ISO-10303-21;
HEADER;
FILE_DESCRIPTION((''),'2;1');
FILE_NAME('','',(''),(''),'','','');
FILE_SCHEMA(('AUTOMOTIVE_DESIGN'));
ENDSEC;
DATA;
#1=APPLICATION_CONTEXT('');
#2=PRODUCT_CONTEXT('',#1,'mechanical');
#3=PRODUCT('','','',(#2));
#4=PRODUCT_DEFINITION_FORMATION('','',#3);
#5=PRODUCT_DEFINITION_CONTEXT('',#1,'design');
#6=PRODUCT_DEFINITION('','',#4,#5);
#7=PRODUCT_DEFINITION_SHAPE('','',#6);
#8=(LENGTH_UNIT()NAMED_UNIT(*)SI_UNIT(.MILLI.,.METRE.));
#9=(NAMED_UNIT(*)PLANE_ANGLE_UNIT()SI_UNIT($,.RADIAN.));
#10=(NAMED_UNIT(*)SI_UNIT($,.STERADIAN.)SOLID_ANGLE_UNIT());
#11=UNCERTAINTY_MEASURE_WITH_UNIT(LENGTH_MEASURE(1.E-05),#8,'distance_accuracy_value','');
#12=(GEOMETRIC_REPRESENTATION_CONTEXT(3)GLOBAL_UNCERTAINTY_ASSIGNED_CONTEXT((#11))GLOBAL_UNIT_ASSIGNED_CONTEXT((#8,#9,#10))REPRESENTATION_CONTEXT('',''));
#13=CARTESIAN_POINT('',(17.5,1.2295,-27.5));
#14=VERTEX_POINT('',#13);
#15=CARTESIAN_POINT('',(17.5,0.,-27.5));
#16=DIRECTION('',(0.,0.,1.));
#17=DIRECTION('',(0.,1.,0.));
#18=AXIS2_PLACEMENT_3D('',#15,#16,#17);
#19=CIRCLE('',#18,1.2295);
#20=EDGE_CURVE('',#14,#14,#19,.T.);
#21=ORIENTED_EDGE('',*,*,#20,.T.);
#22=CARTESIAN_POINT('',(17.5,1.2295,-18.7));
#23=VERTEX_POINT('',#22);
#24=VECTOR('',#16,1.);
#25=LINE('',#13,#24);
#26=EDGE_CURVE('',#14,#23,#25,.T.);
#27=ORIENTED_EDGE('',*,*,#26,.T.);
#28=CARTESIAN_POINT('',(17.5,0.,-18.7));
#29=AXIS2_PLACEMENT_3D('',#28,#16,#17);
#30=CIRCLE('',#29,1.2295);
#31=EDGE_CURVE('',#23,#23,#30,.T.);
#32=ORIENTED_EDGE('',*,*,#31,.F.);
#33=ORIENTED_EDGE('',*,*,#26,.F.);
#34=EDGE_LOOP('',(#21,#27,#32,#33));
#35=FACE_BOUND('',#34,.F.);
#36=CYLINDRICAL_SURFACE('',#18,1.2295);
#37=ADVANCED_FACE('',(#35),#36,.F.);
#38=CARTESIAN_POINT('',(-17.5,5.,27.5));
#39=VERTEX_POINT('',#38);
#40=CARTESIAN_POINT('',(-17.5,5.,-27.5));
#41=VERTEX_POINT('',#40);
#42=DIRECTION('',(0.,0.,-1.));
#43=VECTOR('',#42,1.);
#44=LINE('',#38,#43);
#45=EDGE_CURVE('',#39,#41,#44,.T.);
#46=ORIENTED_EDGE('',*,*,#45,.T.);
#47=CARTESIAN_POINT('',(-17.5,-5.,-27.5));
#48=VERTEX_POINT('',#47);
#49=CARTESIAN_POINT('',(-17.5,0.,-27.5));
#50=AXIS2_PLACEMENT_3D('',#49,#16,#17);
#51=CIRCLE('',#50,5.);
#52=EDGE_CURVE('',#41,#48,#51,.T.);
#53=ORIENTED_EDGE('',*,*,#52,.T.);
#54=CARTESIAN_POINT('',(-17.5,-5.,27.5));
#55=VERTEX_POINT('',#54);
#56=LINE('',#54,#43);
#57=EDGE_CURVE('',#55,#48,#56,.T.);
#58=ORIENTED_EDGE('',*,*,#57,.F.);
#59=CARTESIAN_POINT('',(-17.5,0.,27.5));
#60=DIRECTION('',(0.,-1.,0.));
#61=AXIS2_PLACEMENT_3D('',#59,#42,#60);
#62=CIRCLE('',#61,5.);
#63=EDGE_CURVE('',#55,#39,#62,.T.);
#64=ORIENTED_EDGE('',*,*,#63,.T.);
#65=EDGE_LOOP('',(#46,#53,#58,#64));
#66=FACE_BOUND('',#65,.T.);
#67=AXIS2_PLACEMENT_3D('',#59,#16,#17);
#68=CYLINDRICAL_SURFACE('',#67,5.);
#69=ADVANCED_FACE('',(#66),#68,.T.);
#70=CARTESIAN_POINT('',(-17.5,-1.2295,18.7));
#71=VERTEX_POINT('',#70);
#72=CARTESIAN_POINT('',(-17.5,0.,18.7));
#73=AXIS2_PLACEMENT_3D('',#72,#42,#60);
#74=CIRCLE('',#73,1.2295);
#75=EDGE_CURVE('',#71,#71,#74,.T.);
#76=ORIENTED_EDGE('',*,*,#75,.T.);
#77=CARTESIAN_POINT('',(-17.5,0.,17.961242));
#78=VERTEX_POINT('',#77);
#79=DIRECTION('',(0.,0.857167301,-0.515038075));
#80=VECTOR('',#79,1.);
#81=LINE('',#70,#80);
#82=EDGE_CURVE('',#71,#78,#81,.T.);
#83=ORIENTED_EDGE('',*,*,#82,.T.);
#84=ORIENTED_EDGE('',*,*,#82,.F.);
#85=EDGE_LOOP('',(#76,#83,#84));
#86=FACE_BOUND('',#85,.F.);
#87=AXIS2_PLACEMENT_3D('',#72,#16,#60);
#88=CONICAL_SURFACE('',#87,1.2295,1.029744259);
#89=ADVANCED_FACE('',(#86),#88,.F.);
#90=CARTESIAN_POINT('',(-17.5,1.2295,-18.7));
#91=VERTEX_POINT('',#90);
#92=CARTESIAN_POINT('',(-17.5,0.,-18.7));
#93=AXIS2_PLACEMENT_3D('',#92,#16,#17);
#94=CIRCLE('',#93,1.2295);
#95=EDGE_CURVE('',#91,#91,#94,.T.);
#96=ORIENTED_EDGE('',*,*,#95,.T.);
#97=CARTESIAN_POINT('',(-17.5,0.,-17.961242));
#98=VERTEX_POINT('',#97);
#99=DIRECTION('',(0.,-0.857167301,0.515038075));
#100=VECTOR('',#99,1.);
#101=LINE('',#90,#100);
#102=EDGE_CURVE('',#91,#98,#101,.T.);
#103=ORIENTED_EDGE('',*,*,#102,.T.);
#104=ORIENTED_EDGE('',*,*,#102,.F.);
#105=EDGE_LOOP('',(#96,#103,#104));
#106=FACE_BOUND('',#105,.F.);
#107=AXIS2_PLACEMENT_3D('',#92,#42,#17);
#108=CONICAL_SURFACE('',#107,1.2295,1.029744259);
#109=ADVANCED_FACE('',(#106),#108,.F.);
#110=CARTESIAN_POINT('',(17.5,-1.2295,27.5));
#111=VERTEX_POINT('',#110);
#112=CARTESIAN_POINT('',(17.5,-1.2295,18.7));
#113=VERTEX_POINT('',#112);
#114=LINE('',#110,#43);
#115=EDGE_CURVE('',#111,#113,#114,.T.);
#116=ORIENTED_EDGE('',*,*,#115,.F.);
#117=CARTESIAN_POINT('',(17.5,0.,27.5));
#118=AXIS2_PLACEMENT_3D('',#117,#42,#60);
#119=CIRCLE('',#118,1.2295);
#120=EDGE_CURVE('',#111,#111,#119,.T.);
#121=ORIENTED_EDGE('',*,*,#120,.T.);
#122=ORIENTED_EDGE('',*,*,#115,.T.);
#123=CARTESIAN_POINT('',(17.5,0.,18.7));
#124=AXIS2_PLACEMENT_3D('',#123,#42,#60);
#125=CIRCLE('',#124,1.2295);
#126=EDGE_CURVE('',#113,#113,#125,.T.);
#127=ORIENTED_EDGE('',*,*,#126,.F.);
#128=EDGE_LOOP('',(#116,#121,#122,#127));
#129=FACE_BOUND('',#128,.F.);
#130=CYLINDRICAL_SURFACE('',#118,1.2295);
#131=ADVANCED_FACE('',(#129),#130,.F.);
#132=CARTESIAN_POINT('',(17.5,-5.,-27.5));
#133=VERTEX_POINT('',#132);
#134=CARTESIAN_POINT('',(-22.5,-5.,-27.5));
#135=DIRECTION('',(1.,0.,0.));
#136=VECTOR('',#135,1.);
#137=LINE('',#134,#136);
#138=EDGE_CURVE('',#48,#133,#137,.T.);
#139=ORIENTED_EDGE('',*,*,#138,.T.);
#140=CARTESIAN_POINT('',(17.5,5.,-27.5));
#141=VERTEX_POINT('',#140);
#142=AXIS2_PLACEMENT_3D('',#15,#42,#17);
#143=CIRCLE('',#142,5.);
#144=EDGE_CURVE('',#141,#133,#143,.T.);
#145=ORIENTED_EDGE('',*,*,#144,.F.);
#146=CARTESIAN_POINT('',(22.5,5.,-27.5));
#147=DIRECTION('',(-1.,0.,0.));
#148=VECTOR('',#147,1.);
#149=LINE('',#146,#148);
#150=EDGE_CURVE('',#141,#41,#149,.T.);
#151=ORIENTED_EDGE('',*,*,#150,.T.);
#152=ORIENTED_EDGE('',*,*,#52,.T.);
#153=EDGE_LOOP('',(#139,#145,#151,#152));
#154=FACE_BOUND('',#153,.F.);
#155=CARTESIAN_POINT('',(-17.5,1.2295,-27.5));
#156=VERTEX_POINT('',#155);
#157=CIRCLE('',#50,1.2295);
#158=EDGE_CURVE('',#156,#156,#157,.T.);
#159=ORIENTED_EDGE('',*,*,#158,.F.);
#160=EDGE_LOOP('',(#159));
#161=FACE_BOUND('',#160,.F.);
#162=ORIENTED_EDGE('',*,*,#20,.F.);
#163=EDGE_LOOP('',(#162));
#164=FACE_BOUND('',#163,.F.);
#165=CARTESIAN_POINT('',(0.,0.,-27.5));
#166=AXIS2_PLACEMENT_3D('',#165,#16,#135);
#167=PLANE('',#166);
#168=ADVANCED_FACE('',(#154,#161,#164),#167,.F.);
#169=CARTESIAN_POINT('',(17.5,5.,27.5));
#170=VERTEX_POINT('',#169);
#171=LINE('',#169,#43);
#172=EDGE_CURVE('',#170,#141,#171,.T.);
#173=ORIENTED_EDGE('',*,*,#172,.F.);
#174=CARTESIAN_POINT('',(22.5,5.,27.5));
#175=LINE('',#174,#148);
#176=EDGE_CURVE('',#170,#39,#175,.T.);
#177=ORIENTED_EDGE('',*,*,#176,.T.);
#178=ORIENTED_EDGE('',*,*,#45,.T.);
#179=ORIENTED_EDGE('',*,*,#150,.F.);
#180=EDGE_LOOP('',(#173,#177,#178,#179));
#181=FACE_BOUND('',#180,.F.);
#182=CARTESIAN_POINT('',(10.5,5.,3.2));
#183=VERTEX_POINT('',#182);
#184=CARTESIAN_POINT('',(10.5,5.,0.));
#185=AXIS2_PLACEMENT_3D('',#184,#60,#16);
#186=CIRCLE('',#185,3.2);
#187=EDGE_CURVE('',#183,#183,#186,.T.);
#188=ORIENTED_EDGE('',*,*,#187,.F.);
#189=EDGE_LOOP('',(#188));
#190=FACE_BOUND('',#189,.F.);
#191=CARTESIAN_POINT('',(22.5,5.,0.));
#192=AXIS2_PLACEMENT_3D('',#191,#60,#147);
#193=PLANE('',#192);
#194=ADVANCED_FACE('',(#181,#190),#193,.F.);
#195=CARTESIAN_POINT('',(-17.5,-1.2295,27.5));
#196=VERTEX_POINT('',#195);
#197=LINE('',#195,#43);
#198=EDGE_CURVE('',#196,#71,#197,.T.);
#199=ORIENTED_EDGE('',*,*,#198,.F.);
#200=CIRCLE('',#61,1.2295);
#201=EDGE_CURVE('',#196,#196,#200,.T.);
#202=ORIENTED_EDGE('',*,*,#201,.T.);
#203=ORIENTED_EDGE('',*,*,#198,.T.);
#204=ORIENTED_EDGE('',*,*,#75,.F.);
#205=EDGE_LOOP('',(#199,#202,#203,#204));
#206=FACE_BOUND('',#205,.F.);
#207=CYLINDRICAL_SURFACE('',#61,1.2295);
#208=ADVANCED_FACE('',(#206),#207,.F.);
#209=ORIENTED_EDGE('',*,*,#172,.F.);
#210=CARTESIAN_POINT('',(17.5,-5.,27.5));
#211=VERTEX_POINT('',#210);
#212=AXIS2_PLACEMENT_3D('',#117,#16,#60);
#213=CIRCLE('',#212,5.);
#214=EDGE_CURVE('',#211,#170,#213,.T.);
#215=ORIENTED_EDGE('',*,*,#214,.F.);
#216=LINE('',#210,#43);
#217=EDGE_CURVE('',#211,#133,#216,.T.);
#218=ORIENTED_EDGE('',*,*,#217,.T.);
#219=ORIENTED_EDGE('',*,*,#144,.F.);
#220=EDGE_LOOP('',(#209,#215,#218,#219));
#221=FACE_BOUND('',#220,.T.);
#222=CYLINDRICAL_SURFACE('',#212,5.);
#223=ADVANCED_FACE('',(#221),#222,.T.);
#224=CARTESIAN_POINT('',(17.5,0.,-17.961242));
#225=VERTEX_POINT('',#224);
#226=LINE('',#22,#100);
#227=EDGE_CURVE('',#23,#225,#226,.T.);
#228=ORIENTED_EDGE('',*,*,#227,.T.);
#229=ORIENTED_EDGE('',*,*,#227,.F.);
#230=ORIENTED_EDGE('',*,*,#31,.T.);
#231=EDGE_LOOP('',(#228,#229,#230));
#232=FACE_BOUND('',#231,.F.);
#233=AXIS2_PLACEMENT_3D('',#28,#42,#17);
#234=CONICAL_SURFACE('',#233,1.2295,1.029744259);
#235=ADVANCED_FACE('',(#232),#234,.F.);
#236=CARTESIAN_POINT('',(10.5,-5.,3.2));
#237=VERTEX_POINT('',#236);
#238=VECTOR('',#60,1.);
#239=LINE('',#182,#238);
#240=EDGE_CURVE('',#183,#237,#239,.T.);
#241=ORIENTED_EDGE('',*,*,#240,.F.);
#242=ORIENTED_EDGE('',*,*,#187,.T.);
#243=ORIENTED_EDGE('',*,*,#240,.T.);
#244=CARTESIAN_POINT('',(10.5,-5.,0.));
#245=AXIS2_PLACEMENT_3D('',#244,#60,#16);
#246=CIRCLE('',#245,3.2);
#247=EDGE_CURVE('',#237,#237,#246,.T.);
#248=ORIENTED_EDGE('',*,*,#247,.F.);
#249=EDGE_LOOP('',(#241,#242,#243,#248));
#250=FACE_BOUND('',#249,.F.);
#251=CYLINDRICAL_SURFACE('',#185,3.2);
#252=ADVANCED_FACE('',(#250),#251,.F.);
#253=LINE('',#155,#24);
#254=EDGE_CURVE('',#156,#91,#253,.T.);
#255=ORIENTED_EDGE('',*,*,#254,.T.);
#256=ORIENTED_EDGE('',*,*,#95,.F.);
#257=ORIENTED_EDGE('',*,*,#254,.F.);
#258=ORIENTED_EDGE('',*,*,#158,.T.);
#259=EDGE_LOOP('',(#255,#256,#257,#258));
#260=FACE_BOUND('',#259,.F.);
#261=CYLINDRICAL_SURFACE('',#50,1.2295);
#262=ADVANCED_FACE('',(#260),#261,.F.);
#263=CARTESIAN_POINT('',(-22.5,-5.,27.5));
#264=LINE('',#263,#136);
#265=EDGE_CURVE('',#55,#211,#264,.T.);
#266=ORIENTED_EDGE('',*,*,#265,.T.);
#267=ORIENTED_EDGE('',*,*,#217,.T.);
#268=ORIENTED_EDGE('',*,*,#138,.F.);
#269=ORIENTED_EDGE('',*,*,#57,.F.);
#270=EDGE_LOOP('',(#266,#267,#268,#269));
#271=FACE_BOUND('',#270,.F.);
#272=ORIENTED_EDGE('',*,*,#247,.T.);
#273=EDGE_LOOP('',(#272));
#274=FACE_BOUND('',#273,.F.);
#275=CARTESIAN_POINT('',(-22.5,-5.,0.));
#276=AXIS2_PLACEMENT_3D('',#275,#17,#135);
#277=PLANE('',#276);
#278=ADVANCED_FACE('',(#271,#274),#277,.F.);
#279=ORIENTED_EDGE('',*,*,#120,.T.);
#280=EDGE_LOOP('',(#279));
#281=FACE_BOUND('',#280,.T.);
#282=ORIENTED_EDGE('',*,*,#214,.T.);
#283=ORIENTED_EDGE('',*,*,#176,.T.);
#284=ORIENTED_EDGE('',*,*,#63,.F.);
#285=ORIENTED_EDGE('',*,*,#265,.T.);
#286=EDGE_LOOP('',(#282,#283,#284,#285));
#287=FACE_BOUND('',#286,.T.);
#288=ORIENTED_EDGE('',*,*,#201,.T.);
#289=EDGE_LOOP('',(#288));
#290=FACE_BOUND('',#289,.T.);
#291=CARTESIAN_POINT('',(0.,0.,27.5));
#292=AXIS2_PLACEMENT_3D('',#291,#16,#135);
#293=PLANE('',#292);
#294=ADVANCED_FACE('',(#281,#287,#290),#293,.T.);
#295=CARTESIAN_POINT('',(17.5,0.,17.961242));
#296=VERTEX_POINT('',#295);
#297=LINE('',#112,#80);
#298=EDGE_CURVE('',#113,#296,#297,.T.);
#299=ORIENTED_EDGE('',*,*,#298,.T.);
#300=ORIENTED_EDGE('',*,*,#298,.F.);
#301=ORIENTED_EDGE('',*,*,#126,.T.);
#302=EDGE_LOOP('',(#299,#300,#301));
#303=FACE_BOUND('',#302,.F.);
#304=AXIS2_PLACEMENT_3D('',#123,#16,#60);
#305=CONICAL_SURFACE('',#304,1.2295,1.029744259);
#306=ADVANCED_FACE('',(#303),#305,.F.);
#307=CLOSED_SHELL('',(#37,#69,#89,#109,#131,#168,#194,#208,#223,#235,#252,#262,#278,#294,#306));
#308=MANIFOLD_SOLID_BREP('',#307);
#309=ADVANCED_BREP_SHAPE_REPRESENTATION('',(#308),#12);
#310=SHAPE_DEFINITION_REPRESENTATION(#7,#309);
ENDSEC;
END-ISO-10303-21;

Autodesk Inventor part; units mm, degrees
ref_plane "YZ Plane" through (0, 0, 0) normal (1, 0, 0) x (0, 1, 0)
ref_plane "XZ Plane" through (0, 0, 0) normal (0, 1, 0) x (-1, 0, 0)
ref_plane "XY Plane" through (0, 0, 0) normal (0, 0, 1) x (1, 0, 0)
sketch "スケッチ1" plane through (0, 0, 0) normal (0, 0, 1) x (1, 0, 0)
  line L0 (-22.5, -5) -> (22.5, -5)
  line L1 (22.5, -5) -> (22.5, 5)
  line L2 (22.5, 5) -> (-22.5, 5)
  line L3 (-22.5, 5) -> (-22.5, -5)
  line L4 (-22.5, -5) -> (22.5, 5) construction
  line L5 (22.5, -5) -> (-22.5, 5) construction
  point P0 (0, 0)
  dimension "d0" = 45
  dimension "d1" = 10
extrude "押し出し1" add sketch "スケッチ1" along normal mid plane 55
sketch "スケッチ2" plane through (0, 0, 27.5) normal (0, 0, 1) x (1, 0, 0)
  line L0 (22.5, 5) -> (-22.5, 5) projected
  line L1 (-22.5, 5) -> (-22.5, -5) projected
  line L2 (22.5, -5) -> (22.5, 5) projected
  point P0 (0, 0)
  point P1 (-17.5, 0)
  point P2 (17.5, 0)
  dimension "d4" = 5
  dimension "d5" = 5
  dimension "d6" = 5
  dimension "d7" = 5
hole "穴1" at (-17.5, 0, 27.5) at (17.5, 0, 27.5) direction (0, 0, -1) diameter 2.459 depth 8.8 tip angle 118 thread size "M3x0.5" class "6H" standard "ISO Metric profile"
sketch "スケッチ3" plane through (0, 0, -27.5) normal (0, 0, -1) x (-1, 0, 0)
  line L0 (-22.5, 5) -> (-22.5, -5) projected
  line L1 (-22.5, -5) -> (22.5, -5) projected
  line L2 (22.5, -5) -> (22.5, 5) projected
  line L3 (22.5, 5) -> (-22.5, 5) projected
  circle A0 centre (-17.5, 0) radius 1.2295 projected
  circle A1 centre (17.5, 0) radius 1.2295 projected
  point P0 (0, 0)
hole "穴2" at (17.5, 0, -27.5) at (-17.5, 0, -27.5) direction (0, 0, 1) diameter 2.459 depth 8.8 tip angle 118 thread size "M3x0.5" class "6H" standard "ISO Metric profile"
sketch "スケッチ4" plane through (-22.5, 5, 27.5) normal (0, 1, 0) x (1, 0, 0)
  line L0 (45, 55) -> (45, 0) projected
  line L1 (45, 0) -> (0, 0) projected
  point P0 (22.5, 27.5)
  point P1 (33, 27.5)
  dimension "d22" = 12
  dimension "d23" = 27.5
hole "穴3" at (10.5, 5, 0) direction (0, -1, 0) diameter 6.4 end through all
sketch "スケッチ5" plane through (0, 0, 27.5) normal (0, 0, 1) x (1, 0, 0)
  circle A0 centre (17.5, 0) radius 1.2295 projected
  circle A1 centre (-17.5, 0) radius 1.2295 projected
  line L0 (22.5, -5) -> (22.5, 5) projected
  line L1 (22.5, 5) -> (-22.5, 5) projected
  line L2 (-22.5, 5) -> (-22.5, -5) projected
  line L3 (-22.5, -5) -> (22.5, -5) projected
  line L4 (-17.5, 0) -> (17.5, 0) construction
  line L5 (-17.5, -5) -> (17.5, -5)
  line L6 (17.5, 5) -> (-17.5, 5)
  arc A2 (-17.5, 5) -> (-17.5, -5) centre (-17.5, 0) ccw
  arc A3 (17.5, -5) -> (17.5, 5) centre (17.5, 0) ccw
  point P0 (0, 0)
  point P1 (0, 0)
  point P2 (22.5, 0)
  point P3 (-22.5, 0)
extrude "押し出し2" cut sketch "スケッチ5" against normal through all contours L3 A3 L0 | A3 L1 L0 | L3 L2 A2 | A2 L2 L1
equation "\"d5\" = d4"
equation "\"d6\" = d4"
equation "\"d7\" = d4"
properties part number "camera_connect_part"
